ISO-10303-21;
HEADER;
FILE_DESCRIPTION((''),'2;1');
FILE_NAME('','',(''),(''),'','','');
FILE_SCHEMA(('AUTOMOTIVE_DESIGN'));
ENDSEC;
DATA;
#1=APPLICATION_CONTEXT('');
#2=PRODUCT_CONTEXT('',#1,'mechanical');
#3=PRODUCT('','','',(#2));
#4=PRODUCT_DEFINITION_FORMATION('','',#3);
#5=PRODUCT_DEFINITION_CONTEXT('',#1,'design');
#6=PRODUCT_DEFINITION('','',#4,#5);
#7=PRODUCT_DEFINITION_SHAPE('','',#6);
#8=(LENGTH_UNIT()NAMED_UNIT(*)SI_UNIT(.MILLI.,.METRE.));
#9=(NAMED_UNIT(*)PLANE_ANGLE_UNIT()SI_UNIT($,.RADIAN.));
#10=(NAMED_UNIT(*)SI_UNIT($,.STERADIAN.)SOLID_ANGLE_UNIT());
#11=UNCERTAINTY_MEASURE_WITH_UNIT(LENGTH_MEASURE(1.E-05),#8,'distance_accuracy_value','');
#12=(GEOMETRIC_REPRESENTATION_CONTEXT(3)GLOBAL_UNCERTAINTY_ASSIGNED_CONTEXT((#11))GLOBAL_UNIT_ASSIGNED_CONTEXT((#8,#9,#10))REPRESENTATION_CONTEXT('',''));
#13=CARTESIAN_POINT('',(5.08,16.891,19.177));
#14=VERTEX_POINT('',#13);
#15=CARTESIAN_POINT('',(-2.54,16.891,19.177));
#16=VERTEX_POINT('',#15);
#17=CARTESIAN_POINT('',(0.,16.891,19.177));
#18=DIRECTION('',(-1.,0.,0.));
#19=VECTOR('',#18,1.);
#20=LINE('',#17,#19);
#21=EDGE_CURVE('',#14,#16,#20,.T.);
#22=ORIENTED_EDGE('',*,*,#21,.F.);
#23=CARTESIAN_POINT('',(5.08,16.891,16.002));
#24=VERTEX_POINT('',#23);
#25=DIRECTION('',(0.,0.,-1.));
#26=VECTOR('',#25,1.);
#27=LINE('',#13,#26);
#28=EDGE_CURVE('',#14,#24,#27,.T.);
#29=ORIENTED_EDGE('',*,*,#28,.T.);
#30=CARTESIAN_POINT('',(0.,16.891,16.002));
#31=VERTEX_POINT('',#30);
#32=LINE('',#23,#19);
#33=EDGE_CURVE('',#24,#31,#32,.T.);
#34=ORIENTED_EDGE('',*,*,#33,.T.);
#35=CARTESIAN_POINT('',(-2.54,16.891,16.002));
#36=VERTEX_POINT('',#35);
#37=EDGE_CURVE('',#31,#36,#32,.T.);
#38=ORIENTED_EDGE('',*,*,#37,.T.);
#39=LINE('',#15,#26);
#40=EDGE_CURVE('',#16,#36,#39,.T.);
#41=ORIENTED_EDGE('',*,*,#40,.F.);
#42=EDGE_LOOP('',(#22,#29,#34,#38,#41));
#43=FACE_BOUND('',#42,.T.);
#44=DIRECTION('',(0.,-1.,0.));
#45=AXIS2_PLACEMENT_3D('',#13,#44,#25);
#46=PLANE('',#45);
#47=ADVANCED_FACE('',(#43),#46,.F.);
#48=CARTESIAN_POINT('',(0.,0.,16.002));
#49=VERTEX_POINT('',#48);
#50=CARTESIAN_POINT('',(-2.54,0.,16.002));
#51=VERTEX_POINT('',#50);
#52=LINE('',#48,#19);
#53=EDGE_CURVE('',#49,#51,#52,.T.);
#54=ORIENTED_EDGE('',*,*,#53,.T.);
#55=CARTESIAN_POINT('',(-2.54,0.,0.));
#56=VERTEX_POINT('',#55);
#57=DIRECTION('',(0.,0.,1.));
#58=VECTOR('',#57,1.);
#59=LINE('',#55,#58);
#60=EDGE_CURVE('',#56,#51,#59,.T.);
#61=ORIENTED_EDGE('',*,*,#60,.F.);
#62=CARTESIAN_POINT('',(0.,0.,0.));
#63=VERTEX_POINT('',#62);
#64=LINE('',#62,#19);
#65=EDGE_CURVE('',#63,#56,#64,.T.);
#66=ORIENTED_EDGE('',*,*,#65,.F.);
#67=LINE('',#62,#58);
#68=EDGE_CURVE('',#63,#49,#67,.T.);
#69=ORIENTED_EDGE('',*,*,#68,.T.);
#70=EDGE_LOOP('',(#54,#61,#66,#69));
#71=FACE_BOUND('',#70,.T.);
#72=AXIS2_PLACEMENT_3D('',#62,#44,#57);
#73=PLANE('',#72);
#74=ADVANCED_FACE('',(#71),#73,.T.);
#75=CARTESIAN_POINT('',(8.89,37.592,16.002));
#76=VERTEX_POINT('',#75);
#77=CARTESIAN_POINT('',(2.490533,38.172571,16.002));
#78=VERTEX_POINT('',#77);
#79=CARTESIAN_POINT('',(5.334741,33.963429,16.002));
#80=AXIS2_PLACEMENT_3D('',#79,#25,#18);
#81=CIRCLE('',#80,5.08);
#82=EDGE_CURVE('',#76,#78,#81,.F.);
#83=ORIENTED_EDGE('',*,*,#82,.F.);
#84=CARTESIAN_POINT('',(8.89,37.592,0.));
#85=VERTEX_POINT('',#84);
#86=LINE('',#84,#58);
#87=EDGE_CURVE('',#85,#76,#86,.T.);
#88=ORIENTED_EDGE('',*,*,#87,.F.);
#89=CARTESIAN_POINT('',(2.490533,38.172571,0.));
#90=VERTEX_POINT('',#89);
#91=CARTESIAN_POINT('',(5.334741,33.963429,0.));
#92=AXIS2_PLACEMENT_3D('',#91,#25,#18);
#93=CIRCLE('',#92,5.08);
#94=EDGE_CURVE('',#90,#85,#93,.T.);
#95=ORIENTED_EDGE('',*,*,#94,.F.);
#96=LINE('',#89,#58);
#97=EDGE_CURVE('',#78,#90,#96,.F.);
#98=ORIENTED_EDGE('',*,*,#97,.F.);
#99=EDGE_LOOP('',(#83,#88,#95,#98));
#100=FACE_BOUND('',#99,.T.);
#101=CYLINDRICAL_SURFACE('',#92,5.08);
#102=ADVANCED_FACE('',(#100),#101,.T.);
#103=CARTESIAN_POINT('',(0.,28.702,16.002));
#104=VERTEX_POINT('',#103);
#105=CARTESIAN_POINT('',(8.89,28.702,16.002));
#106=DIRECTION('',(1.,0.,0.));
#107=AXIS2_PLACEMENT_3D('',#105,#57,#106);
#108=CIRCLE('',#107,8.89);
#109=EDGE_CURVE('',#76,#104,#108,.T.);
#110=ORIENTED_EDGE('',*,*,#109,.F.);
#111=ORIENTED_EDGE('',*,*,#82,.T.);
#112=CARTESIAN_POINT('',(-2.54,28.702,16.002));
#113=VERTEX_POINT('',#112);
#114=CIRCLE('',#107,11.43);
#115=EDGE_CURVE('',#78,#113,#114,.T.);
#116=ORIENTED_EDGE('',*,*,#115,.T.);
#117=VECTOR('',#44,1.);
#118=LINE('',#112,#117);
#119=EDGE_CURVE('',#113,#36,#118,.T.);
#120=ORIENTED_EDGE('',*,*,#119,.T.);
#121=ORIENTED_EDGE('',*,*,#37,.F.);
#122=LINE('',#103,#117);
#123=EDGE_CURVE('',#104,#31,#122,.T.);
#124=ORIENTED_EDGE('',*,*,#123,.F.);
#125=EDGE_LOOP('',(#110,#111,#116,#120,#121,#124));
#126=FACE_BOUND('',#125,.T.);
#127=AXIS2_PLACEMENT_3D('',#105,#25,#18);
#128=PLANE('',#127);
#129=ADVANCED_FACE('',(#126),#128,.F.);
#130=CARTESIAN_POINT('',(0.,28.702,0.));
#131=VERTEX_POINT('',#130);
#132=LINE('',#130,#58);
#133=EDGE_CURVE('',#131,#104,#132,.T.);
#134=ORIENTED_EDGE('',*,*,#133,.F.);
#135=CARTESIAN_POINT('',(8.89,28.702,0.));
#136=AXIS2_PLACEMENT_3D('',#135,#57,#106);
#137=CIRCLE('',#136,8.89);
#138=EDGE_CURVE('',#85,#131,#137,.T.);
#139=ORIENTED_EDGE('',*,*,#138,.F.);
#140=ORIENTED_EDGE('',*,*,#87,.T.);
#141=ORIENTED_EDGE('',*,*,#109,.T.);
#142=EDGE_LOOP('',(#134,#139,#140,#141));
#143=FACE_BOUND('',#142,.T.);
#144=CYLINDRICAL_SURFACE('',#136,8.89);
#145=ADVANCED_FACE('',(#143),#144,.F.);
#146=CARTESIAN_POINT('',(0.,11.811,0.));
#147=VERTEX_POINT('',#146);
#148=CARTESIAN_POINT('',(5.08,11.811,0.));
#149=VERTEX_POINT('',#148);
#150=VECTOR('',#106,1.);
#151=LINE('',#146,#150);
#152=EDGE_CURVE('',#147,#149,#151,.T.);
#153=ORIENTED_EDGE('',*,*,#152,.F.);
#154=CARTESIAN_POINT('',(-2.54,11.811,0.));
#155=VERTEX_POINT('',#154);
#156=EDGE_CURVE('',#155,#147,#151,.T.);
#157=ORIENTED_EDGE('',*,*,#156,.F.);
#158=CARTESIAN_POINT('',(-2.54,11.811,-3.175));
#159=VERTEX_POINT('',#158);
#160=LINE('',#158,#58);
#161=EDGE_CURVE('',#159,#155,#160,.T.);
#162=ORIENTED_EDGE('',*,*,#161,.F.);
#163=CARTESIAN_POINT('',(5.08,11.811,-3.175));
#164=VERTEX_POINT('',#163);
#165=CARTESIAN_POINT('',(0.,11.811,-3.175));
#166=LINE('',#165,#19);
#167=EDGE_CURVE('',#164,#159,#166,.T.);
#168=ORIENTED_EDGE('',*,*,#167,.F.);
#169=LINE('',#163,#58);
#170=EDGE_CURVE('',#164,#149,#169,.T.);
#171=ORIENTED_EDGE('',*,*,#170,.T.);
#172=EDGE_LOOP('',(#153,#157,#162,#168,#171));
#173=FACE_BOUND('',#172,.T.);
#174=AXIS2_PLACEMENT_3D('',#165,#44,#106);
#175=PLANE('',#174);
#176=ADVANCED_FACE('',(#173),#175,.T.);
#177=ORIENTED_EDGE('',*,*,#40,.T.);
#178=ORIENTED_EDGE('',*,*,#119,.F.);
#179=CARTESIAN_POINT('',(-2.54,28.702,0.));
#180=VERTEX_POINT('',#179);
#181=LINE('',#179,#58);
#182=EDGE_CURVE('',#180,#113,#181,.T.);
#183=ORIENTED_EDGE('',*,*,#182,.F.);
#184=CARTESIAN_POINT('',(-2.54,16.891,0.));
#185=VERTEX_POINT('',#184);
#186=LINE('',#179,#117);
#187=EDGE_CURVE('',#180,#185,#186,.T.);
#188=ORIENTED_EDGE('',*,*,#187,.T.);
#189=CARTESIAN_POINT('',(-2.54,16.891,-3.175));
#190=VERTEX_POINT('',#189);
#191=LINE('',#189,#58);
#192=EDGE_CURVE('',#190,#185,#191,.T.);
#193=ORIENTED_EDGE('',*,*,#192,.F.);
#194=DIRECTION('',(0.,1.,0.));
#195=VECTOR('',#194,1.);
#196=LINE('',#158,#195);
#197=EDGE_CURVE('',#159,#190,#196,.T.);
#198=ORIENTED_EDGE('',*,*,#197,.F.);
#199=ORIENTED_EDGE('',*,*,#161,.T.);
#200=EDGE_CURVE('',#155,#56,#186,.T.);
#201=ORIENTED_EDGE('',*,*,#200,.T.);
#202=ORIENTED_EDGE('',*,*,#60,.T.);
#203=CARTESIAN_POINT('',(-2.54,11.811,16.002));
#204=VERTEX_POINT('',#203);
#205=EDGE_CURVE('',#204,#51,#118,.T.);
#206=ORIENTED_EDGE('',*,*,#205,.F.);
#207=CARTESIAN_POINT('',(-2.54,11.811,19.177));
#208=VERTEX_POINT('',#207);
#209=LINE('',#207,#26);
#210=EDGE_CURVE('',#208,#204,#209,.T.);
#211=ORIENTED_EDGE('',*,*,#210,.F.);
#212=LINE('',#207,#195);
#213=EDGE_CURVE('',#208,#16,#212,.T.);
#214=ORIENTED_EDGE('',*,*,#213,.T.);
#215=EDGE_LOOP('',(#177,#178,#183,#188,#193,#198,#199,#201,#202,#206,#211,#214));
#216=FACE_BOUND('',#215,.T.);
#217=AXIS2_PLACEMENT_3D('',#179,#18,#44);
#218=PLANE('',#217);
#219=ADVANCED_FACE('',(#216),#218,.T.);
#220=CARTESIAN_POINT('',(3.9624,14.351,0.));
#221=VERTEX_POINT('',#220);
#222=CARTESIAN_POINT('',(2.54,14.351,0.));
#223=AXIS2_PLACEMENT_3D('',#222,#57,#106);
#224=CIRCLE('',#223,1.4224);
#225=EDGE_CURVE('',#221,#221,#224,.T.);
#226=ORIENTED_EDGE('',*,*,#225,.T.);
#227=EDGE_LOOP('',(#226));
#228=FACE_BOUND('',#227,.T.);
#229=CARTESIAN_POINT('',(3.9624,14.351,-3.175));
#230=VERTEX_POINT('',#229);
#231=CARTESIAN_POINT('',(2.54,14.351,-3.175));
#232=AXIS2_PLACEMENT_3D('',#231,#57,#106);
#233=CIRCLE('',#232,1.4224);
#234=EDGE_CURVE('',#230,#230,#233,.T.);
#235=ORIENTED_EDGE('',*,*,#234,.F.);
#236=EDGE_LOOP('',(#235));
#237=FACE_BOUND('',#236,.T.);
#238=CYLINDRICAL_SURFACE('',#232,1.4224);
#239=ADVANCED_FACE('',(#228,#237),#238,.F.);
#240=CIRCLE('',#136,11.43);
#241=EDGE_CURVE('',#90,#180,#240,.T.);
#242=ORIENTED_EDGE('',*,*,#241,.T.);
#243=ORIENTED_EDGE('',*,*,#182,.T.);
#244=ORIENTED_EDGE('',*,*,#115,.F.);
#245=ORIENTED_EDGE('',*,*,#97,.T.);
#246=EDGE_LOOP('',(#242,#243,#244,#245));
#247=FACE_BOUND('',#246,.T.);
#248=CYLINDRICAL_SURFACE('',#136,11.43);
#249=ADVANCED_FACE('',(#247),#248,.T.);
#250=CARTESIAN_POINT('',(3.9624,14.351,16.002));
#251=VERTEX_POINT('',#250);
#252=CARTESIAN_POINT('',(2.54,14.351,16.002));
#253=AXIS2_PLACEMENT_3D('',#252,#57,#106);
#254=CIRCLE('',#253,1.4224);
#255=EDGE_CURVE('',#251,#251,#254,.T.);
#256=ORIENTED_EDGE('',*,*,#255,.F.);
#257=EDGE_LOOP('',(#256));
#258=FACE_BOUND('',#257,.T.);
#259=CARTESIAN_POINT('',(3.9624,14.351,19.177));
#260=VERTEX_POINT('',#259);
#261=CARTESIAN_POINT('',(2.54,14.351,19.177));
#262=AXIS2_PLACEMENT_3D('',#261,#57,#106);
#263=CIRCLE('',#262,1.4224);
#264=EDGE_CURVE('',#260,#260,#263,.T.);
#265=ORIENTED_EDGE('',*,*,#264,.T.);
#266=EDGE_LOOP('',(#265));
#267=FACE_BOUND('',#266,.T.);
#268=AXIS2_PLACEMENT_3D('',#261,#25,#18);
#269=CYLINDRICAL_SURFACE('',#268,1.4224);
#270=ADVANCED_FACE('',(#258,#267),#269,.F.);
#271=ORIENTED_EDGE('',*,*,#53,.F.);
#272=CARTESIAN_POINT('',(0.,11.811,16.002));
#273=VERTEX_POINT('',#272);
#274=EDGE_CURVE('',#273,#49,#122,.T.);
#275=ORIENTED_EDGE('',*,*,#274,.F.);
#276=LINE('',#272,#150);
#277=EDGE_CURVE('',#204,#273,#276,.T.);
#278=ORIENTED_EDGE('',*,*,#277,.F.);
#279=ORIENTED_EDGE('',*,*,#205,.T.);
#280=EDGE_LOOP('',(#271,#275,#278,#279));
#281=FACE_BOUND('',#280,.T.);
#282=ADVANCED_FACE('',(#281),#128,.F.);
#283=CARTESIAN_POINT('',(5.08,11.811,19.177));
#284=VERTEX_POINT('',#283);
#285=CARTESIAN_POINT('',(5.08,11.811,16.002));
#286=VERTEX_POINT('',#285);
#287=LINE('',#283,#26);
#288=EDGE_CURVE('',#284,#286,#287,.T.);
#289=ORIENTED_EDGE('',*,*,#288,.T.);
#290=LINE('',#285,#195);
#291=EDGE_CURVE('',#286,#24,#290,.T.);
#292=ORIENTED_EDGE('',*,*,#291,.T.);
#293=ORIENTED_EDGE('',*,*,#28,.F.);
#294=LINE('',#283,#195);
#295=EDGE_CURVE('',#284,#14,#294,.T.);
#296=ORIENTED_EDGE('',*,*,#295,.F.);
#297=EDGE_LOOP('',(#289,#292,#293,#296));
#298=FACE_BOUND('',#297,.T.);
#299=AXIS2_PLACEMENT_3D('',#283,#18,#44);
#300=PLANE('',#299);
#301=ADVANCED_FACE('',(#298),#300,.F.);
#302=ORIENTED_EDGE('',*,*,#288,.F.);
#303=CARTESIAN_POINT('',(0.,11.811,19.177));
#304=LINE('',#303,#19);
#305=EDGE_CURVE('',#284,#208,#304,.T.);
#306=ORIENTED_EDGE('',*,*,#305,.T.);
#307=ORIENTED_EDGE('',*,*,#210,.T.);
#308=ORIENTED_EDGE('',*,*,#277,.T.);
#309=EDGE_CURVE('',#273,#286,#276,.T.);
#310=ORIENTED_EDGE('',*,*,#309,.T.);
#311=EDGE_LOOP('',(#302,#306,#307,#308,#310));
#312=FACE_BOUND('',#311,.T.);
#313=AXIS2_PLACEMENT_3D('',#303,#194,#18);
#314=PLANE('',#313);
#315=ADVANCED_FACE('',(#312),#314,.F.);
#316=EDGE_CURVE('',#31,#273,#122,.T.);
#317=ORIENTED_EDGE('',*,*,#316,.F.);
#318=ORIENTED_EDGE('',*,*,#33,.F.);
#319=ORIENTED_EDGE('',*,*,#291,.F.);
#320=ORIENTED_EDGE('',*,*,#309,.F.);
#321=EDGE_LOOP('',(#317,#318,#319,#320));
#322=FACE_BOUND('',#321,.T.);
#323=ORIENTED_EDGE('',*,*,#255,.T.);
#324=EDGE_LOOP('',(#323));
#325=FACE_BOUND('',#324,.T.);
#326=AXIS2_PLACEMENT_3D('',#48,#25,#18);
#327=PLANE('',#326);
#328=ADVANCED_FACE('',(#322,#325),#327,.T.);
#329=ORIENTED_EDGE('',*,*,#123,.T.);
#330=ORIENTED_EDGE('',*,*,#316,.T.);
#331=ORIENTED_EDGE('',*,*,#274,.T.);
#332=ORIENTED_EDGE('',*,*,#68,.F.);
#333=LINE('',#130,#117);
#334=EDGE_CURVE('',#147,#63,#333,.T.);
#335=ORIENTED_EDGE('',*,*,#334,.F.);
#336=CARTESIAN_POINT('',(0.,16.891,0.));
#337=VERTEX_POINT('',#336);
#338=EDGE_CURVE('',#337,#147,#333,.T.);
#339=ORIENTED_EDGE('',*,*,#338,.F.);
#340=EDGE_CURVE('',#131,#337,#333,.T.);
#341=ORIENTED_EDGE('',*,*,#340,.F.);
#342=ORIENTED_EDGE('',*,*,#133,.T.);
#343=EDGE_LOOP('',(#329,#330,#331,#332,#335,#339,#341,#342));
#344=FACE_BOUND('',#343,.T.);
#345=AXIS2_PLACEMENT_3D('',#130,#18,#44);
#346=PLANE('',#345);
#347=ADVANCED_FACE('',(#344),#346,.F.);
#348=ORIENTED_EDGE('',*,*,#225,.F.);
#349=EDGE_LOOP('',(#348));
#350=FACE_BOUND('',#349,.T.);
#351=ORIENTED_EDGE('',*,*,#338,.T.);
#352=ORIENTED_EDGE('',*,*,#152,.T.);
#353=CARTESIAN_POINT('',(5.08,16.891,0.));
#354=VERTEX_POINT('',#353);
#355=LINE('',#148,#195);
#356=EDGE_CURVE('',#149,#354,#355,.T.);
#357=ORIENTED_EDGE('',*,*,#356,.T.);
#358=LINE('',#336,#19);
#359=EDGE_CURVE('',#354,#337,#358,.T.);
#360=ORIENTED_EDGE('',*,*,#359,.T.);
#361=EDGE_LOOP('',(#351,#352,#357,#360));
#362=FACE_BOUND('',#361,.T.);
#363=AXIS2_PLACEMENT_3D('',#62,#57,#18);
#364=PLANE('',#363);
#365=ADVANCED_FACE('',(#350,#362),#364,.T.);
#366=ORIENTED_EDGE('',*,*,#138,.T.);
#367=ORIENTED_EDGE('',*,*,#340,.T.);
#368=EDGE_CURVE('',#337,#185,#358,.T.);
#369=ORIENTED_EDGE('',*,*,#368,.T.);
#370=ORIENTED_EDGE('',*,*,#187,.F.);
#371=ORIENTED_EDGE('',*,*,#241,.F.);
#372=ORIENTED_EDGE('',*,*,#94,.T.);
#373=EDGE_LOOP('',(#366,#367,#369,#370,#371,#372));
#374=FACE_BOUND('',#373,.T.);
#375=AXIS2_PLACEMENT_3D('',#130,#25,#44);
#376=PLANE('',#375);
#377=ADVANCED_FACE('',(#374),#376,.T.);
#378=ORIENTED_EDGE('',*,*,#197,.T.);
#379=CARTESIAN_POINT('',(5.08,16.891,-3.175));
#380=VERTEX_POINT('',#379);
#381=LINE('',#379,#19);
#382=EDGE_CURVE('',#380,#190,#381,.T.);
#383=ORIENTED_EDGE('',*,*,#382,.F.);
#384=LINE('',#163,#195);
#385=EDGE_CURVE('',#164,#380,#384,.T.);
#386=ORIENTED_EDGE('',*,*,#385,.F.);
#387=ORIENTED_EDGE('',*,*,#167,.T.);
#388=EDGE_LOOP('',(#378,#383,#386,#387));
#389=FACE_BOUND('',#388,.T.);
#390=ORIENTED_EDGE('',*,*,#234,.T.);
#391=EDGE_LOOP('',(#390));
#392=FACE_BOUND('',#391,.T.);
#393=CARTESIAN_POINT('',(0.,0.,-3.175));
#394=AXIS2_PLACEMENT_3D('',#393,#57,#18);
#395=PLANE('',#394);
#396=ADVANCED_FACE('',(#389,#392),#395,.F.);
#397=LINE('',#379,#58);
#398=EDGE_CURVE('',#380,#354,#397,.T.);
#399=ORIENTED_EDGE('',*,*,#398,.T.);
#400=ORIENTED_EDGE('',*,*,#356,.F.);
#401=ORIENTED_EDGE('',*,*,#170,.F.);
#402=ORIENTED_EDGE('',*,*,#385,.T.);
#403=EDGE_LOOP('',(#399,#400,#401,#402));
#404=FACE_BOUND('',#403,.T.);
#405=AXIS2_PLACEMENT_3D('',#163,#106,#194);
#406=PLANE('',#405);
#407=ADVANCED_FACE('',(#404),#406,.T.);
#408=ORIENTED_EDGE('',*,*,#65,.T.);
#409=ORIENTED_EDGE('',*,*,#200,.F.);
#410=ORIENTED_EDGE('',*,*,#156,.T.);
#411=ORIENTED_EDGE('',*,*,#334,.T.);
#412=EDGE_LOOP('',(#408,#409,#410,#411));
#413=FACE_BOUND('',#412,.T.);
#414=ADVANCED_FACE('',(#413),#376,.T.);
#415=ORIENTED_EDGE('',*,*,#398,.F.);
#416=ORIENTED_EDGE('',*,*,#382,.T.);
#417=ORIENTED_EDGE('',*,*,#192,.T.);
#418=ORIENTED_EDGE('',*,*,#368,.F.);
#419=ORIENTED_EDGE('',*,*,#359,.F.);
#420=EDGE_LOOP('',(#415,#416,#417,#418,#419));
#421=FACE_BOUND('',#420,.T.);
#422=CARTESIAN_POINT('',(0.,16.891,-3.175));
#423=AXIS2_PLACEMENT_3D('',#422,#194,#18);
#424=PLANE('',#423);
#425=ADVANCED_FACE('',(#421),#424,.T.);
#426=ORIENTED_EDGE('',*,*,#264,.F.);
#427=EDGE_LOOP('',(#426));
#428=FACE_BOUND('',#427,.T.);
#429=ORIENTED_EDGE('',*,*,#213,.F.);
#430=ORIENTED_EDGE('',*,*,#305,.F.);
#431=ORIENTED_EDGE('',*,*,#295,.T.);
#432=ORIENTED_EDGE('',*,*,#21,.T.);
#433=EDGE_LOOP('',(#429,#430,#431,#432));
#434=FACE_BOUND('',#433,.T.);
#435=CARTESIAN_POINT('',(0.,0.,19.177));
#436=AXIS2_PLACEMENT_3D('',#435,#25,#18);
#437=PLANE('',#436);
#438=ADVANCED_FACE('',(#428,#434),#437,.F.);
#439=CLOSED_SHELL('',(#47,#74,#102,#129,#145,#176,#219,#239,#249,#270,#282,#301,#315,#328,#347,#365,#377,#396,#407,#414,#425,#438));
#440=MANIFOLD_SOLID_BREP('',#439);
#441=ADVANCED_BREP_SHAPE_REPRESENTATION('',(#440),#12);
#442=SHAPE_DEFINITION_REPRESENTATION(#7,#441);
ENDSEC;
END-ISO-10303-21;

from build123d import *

# Parameters (mm, degrees)
SURFACE_EXTRUDE2_1_DEPTH = 16.002
THICKEN2_T1              = 2.54
FILLET3_R                = 5.08
SURFACE_KNIT2_DEPTH      = 16.002
SKETCH6_R                = 1.4224
BOSS_EXTRUDE1_DEPTH      = 3.175


with BuildPart() as body_1:
    # Surface-Extrude2: a surface, the sketch's curves swept straight by 16.002 mm
    with BuildLine(Plane.XY, mode=Mode.PRIVATE) as surface_extrude2_1_path:
        Line((0, 0), (0, 28.702))
        ThreePointArc((0, 28.702), (2.603820715, 34.988179285), (8.89, 37.592))
    surface_extrude2_1 = Shell.extrude(surface_extrude2_1_path.wire(), (0 * SURFACE_EXTRUDE2_1_DEPTH, 0 * SURFACE_EXTRUDE2_1_DEPTH, 1 * SURFACE_EXTRUDE2_1_DEPTH))
    add(Solid.thicken(surface_extrude2_1, THICKEN2_T1))

    # Fillet3
    # the kernel refuses this fillet: 5.08 mm, written as the material it takes off along each edge
    with BuildSketch(Plane(origin=(8.89, 40.132, -16.731806751), x_dir=(-0.9561828874675108, -0.29277002188457374, 0), z_dir=(0, 0, 1))) as fillet3_piece_1:
        with BuildLine():
            CenterArc((5.205450989, 4.857409068), FILLET3_R, 208.560825218, 78.463040967)
            Line((0.743635856, 2.428704534), (0.654399553, 2.380130443))
            ThreePointArc((0.654399553, 2.380130443), (0.274669746, 1.244097701), (-0.097148181, 0.029745434))
            Line((-0.097148181, 0.029745434), (-0.029745434, -0.097148181))
            ThreePointArc((-0.029745434, -0.097148181), (3.34636135, -0.602429596), (6.722468135, -0.097148181))
            Line((6.722468135, -0.097148181), (6.6927227, 0))
        make_face()
    extrude(amount=49.465613501, mode=Mode.SUBTRACT)


with BuildPart() as body_2:
    # Surface-Knit2: read off the stored shape, not the designer's step
    # Surface-Knit2 outline → Surface-Knit2 (new body)
    with BuildSketch(Plane.XY):
        with BuildLine():
            Line((-2.54, 28.702), (-2.54, 0))
            Line((-2.54, 0), (0, 0))
            Line((0, 0), (0, 28.702))
            ThreePointArc((0, 28.702), (2.603820715, 34.988179285), (8.89, 37.592))
            ThreePointArc((8.89, 37.592), (5.793722616, 39.022651388), (2.490533083, 38.172571429))
            ThreePointArc((2.490533083, 38.172571429), (-1.204325308, 34.063855702), (-2.54, 28.702))
        make_face()
    extrude(amount=SURFACE_KNIT2_DEPTH)

    # Sketch6 → Boss-Extrude1 (add)
    with BuildSketch(Plane.XY.offset(16.002)):
        Polygon((0, 11.811), (5.08, 11.811), (5.08, 16.891), (0, 16.891), (-2.54, 16.891), (-2.54, 11.811), align=None)
        with Locations((2.54, 14.351)):
            Circle(SKETCH6_R, mode=Mode.SUBTRACT)
    boss_extrude1 = extrude(amount=BOSS_EXTRUDE1_DEPTH)

    # Mirror1: Boss-Extrude1 across plane
    add(boss_extrude1.mirror(Plane(origin=(0, 0, 8.001), x_dir=(1, 0, 0), z_dir=(0, 0, -1))))


solid = body_2.part
